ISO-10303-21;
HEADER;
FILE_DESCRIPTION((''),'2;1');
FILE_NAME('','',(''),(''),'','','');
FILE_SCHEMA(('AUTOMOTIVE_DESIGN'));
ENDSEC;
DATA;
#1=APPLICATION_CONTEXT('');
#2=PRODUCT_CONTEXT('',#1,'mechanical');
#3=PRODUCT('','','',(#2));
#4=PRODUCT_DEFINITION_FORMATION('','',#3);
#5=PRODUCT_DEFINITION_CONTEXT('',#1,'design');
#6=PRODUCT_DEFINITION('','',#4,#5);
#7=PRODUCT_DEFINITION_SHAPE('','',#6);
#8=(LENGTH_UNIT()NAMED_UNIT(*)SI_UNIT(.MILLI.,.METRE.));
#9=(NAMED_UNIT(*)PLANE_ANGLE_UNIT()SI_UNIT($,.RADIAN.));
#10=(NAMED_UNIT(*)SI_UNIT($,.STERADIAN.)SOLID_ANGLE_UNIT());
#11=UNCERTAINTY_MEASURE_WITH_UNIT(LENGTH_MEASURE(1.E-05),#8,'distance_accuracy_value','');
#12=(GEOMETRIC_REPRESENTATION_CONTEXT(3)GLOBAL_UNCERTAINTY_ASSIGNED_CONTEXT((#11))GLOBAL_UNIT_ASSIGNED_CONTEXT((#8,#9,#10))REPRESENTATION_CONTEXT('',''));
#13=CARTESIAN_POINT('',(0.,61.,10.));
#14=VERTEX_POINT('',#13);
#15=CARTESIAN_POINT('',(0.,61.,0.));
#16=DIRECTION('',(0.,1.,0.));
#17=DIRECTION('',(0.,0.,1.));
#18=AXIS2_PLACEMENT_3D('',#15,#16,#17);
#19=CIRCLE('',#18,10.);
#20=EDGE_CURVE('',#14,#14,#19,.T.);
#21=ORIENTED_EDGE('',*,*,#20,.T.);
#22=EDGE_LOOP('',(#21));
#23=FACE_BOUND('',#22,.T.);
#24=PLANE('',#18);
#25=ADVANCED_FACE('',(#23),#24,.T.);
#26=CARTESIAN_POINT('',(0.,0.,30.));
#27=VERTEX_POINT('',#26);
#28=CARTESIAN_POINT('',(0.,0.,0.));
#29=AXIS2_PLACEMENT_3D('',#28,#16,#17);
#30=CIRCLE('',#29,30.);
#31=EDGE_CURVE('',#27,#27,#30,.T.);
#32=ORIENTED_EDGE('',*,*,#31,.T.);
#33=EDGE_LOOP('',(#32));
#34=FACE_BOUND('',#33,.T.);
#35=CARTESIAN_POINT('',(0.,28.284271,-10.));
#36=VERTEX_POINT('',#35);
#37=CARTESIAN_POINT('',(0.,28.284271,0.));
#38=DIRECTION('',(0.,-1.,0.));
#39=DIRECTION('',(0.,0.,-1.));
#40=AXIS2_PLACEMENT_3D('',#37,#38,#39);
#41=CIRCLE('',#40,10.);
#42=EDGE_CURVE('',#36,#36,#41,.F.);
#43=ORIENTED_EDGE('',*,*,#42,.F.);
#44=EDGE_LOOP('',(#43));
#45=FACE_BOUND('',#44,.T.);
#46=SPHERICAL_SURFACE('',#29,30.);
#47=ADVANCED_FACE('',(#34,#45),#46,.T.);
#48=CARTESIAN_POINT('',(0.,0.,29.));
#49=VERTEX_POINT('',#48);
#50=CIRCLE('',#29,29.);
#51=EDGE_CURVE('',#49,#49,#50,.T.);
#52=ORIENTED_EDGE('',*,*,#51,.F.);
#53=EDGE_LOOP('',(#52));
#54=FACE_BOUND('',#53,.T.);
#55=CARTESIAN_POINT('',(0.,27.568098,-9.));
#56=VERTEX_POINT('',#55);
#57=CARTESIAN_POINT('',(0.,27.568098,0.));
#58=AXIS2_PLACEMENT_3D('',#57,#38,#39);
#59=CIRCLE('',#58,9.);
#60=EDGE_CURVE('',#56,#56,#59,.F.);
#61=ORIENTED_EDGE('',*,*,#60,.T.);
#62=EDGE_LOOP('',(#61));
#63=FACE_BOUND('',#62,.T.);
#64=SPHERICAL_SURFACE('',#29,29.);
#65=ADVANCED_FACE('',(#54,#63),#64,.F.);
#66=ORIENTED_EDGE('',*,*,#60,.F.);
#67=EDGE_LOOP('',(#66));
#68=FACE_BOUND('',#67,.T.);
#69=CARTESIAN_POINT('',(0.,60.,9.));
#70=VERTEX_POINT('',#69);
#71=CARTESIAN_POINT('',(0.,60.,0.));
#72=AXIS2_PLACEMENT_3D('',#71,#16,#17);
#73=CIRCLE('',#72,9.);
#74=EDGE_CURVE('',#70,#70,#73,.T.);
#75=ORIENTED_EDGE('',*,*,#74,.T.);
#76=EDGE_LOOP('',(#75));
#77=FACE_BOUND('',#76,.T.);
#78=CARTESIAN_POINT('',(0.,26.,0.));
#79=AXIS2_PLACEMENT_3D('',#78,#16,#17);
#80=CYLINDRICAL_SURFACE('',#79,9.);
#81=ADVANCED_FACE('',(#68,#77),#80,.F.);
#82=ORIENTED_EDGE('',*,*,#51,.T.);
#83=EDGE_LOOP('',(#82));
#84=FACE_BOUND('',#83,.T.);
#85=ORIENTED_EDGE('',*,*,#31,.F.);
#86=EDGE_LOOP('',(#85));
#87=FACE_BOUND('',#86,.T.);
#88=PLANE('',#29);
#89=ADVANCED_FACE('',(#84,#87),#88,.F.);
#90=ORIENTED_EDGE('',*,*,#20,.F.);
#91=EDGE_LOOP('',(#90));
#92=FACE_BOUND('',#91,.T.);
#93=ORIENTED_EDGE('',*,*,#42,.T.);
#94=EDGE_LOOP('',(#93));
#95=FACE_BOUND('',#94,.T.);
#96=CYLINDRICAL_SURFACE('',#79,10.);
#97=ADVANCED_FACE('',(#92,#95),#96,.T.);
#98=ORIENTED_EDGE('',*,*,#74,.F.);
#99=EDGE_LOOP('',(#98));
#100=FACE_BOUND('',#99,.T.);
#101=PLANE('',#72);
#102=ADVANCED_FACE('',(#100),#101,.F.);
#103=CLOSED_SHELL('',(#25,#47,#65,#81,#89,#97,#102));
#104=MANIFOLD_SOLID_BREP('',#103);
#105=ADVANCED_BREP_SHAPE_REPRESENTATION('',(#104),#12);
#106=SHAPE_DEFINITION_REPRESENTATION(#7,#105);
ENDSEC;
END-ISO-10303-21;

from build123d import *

# Parameters (mm, degrees)
BOSS_EXTRUDE1_DEPTH      = 31
BOSS_EXTRUDE1_DEPTH_BACK = 4
SKETCH7_R                = 10
SKETCH10_R               = 30
CUT_EXTRUDE1_DEPTH       = 47


# Read off the part's stored shape, not the designer's step: Shell1
with BuildPart() as part:
    # Sketch5 → Revolve3 (revolve)
    with BuildSketch(Plane(origin=(0, 0, 0), x_dir=(1, 0, 0), z_dir=(0, 1, 0))):
        with BuildLine():
            Line((0, -30), (0, 30))
            ThreePointArc((0, 30), (30, 0), (0, -30))
        make_face()
    revolve(axis=Axis((0, 0, 30), (0, 0, -1)))

    # Sketch7 → Boss-Extrude1 (add, two sides: drawn at the far end of the back side and taken through both)
    with BuildSketch(Plane(origin=(0, 30, 0), x_dir=(1, 0, 0), z_dir=(0, 1, 0)).offset(-BOSS_EXTRUDE1_DEPTH_BACK)):
        with Locations(Location((0, 0, 0), (0, 0, 270))):
            Circle(SKETCH7_R)
    extrude(amount=BOSS_EXTRUDE1_DEPTH + BOSS_EXTRUDE1_DEPTH_BACK)

    # Sketch10 → Cut-Extrude1 (cut)
    with BuildSketch(Plane(origin=(0, 0, 0), x_dir=(1, 0, 0), z_dir=(0, 1, 0))):
        Circle(SKETCH10_R)
    extrude(amount=-CUT_EXTRUDE1_DEPTH, mode=Mode.SUBTRACT)

    # Shell1 outline → Shell1 (revolve, cut)
    with BuildSketch(Plane.XY):
        with BuildLine():
            ThreePointArc((29, -2.9e-08), (23.473389189, 17.029386366), (8.999999972, 27.568097513))
            Line((8.999999972, 27.568097513), (9, 60))
            Line((9, 60), (0, 60))
            Line((0, 60), (0, -2.9e-08))
            Line((0, -2.9e-08), (29, -2.9e-08))
        make_face()
    revolve(axis=Axis((0, 0, 0), (0, 1, 0)), mode=Mode.SUBTRACT)


solid = part.part
